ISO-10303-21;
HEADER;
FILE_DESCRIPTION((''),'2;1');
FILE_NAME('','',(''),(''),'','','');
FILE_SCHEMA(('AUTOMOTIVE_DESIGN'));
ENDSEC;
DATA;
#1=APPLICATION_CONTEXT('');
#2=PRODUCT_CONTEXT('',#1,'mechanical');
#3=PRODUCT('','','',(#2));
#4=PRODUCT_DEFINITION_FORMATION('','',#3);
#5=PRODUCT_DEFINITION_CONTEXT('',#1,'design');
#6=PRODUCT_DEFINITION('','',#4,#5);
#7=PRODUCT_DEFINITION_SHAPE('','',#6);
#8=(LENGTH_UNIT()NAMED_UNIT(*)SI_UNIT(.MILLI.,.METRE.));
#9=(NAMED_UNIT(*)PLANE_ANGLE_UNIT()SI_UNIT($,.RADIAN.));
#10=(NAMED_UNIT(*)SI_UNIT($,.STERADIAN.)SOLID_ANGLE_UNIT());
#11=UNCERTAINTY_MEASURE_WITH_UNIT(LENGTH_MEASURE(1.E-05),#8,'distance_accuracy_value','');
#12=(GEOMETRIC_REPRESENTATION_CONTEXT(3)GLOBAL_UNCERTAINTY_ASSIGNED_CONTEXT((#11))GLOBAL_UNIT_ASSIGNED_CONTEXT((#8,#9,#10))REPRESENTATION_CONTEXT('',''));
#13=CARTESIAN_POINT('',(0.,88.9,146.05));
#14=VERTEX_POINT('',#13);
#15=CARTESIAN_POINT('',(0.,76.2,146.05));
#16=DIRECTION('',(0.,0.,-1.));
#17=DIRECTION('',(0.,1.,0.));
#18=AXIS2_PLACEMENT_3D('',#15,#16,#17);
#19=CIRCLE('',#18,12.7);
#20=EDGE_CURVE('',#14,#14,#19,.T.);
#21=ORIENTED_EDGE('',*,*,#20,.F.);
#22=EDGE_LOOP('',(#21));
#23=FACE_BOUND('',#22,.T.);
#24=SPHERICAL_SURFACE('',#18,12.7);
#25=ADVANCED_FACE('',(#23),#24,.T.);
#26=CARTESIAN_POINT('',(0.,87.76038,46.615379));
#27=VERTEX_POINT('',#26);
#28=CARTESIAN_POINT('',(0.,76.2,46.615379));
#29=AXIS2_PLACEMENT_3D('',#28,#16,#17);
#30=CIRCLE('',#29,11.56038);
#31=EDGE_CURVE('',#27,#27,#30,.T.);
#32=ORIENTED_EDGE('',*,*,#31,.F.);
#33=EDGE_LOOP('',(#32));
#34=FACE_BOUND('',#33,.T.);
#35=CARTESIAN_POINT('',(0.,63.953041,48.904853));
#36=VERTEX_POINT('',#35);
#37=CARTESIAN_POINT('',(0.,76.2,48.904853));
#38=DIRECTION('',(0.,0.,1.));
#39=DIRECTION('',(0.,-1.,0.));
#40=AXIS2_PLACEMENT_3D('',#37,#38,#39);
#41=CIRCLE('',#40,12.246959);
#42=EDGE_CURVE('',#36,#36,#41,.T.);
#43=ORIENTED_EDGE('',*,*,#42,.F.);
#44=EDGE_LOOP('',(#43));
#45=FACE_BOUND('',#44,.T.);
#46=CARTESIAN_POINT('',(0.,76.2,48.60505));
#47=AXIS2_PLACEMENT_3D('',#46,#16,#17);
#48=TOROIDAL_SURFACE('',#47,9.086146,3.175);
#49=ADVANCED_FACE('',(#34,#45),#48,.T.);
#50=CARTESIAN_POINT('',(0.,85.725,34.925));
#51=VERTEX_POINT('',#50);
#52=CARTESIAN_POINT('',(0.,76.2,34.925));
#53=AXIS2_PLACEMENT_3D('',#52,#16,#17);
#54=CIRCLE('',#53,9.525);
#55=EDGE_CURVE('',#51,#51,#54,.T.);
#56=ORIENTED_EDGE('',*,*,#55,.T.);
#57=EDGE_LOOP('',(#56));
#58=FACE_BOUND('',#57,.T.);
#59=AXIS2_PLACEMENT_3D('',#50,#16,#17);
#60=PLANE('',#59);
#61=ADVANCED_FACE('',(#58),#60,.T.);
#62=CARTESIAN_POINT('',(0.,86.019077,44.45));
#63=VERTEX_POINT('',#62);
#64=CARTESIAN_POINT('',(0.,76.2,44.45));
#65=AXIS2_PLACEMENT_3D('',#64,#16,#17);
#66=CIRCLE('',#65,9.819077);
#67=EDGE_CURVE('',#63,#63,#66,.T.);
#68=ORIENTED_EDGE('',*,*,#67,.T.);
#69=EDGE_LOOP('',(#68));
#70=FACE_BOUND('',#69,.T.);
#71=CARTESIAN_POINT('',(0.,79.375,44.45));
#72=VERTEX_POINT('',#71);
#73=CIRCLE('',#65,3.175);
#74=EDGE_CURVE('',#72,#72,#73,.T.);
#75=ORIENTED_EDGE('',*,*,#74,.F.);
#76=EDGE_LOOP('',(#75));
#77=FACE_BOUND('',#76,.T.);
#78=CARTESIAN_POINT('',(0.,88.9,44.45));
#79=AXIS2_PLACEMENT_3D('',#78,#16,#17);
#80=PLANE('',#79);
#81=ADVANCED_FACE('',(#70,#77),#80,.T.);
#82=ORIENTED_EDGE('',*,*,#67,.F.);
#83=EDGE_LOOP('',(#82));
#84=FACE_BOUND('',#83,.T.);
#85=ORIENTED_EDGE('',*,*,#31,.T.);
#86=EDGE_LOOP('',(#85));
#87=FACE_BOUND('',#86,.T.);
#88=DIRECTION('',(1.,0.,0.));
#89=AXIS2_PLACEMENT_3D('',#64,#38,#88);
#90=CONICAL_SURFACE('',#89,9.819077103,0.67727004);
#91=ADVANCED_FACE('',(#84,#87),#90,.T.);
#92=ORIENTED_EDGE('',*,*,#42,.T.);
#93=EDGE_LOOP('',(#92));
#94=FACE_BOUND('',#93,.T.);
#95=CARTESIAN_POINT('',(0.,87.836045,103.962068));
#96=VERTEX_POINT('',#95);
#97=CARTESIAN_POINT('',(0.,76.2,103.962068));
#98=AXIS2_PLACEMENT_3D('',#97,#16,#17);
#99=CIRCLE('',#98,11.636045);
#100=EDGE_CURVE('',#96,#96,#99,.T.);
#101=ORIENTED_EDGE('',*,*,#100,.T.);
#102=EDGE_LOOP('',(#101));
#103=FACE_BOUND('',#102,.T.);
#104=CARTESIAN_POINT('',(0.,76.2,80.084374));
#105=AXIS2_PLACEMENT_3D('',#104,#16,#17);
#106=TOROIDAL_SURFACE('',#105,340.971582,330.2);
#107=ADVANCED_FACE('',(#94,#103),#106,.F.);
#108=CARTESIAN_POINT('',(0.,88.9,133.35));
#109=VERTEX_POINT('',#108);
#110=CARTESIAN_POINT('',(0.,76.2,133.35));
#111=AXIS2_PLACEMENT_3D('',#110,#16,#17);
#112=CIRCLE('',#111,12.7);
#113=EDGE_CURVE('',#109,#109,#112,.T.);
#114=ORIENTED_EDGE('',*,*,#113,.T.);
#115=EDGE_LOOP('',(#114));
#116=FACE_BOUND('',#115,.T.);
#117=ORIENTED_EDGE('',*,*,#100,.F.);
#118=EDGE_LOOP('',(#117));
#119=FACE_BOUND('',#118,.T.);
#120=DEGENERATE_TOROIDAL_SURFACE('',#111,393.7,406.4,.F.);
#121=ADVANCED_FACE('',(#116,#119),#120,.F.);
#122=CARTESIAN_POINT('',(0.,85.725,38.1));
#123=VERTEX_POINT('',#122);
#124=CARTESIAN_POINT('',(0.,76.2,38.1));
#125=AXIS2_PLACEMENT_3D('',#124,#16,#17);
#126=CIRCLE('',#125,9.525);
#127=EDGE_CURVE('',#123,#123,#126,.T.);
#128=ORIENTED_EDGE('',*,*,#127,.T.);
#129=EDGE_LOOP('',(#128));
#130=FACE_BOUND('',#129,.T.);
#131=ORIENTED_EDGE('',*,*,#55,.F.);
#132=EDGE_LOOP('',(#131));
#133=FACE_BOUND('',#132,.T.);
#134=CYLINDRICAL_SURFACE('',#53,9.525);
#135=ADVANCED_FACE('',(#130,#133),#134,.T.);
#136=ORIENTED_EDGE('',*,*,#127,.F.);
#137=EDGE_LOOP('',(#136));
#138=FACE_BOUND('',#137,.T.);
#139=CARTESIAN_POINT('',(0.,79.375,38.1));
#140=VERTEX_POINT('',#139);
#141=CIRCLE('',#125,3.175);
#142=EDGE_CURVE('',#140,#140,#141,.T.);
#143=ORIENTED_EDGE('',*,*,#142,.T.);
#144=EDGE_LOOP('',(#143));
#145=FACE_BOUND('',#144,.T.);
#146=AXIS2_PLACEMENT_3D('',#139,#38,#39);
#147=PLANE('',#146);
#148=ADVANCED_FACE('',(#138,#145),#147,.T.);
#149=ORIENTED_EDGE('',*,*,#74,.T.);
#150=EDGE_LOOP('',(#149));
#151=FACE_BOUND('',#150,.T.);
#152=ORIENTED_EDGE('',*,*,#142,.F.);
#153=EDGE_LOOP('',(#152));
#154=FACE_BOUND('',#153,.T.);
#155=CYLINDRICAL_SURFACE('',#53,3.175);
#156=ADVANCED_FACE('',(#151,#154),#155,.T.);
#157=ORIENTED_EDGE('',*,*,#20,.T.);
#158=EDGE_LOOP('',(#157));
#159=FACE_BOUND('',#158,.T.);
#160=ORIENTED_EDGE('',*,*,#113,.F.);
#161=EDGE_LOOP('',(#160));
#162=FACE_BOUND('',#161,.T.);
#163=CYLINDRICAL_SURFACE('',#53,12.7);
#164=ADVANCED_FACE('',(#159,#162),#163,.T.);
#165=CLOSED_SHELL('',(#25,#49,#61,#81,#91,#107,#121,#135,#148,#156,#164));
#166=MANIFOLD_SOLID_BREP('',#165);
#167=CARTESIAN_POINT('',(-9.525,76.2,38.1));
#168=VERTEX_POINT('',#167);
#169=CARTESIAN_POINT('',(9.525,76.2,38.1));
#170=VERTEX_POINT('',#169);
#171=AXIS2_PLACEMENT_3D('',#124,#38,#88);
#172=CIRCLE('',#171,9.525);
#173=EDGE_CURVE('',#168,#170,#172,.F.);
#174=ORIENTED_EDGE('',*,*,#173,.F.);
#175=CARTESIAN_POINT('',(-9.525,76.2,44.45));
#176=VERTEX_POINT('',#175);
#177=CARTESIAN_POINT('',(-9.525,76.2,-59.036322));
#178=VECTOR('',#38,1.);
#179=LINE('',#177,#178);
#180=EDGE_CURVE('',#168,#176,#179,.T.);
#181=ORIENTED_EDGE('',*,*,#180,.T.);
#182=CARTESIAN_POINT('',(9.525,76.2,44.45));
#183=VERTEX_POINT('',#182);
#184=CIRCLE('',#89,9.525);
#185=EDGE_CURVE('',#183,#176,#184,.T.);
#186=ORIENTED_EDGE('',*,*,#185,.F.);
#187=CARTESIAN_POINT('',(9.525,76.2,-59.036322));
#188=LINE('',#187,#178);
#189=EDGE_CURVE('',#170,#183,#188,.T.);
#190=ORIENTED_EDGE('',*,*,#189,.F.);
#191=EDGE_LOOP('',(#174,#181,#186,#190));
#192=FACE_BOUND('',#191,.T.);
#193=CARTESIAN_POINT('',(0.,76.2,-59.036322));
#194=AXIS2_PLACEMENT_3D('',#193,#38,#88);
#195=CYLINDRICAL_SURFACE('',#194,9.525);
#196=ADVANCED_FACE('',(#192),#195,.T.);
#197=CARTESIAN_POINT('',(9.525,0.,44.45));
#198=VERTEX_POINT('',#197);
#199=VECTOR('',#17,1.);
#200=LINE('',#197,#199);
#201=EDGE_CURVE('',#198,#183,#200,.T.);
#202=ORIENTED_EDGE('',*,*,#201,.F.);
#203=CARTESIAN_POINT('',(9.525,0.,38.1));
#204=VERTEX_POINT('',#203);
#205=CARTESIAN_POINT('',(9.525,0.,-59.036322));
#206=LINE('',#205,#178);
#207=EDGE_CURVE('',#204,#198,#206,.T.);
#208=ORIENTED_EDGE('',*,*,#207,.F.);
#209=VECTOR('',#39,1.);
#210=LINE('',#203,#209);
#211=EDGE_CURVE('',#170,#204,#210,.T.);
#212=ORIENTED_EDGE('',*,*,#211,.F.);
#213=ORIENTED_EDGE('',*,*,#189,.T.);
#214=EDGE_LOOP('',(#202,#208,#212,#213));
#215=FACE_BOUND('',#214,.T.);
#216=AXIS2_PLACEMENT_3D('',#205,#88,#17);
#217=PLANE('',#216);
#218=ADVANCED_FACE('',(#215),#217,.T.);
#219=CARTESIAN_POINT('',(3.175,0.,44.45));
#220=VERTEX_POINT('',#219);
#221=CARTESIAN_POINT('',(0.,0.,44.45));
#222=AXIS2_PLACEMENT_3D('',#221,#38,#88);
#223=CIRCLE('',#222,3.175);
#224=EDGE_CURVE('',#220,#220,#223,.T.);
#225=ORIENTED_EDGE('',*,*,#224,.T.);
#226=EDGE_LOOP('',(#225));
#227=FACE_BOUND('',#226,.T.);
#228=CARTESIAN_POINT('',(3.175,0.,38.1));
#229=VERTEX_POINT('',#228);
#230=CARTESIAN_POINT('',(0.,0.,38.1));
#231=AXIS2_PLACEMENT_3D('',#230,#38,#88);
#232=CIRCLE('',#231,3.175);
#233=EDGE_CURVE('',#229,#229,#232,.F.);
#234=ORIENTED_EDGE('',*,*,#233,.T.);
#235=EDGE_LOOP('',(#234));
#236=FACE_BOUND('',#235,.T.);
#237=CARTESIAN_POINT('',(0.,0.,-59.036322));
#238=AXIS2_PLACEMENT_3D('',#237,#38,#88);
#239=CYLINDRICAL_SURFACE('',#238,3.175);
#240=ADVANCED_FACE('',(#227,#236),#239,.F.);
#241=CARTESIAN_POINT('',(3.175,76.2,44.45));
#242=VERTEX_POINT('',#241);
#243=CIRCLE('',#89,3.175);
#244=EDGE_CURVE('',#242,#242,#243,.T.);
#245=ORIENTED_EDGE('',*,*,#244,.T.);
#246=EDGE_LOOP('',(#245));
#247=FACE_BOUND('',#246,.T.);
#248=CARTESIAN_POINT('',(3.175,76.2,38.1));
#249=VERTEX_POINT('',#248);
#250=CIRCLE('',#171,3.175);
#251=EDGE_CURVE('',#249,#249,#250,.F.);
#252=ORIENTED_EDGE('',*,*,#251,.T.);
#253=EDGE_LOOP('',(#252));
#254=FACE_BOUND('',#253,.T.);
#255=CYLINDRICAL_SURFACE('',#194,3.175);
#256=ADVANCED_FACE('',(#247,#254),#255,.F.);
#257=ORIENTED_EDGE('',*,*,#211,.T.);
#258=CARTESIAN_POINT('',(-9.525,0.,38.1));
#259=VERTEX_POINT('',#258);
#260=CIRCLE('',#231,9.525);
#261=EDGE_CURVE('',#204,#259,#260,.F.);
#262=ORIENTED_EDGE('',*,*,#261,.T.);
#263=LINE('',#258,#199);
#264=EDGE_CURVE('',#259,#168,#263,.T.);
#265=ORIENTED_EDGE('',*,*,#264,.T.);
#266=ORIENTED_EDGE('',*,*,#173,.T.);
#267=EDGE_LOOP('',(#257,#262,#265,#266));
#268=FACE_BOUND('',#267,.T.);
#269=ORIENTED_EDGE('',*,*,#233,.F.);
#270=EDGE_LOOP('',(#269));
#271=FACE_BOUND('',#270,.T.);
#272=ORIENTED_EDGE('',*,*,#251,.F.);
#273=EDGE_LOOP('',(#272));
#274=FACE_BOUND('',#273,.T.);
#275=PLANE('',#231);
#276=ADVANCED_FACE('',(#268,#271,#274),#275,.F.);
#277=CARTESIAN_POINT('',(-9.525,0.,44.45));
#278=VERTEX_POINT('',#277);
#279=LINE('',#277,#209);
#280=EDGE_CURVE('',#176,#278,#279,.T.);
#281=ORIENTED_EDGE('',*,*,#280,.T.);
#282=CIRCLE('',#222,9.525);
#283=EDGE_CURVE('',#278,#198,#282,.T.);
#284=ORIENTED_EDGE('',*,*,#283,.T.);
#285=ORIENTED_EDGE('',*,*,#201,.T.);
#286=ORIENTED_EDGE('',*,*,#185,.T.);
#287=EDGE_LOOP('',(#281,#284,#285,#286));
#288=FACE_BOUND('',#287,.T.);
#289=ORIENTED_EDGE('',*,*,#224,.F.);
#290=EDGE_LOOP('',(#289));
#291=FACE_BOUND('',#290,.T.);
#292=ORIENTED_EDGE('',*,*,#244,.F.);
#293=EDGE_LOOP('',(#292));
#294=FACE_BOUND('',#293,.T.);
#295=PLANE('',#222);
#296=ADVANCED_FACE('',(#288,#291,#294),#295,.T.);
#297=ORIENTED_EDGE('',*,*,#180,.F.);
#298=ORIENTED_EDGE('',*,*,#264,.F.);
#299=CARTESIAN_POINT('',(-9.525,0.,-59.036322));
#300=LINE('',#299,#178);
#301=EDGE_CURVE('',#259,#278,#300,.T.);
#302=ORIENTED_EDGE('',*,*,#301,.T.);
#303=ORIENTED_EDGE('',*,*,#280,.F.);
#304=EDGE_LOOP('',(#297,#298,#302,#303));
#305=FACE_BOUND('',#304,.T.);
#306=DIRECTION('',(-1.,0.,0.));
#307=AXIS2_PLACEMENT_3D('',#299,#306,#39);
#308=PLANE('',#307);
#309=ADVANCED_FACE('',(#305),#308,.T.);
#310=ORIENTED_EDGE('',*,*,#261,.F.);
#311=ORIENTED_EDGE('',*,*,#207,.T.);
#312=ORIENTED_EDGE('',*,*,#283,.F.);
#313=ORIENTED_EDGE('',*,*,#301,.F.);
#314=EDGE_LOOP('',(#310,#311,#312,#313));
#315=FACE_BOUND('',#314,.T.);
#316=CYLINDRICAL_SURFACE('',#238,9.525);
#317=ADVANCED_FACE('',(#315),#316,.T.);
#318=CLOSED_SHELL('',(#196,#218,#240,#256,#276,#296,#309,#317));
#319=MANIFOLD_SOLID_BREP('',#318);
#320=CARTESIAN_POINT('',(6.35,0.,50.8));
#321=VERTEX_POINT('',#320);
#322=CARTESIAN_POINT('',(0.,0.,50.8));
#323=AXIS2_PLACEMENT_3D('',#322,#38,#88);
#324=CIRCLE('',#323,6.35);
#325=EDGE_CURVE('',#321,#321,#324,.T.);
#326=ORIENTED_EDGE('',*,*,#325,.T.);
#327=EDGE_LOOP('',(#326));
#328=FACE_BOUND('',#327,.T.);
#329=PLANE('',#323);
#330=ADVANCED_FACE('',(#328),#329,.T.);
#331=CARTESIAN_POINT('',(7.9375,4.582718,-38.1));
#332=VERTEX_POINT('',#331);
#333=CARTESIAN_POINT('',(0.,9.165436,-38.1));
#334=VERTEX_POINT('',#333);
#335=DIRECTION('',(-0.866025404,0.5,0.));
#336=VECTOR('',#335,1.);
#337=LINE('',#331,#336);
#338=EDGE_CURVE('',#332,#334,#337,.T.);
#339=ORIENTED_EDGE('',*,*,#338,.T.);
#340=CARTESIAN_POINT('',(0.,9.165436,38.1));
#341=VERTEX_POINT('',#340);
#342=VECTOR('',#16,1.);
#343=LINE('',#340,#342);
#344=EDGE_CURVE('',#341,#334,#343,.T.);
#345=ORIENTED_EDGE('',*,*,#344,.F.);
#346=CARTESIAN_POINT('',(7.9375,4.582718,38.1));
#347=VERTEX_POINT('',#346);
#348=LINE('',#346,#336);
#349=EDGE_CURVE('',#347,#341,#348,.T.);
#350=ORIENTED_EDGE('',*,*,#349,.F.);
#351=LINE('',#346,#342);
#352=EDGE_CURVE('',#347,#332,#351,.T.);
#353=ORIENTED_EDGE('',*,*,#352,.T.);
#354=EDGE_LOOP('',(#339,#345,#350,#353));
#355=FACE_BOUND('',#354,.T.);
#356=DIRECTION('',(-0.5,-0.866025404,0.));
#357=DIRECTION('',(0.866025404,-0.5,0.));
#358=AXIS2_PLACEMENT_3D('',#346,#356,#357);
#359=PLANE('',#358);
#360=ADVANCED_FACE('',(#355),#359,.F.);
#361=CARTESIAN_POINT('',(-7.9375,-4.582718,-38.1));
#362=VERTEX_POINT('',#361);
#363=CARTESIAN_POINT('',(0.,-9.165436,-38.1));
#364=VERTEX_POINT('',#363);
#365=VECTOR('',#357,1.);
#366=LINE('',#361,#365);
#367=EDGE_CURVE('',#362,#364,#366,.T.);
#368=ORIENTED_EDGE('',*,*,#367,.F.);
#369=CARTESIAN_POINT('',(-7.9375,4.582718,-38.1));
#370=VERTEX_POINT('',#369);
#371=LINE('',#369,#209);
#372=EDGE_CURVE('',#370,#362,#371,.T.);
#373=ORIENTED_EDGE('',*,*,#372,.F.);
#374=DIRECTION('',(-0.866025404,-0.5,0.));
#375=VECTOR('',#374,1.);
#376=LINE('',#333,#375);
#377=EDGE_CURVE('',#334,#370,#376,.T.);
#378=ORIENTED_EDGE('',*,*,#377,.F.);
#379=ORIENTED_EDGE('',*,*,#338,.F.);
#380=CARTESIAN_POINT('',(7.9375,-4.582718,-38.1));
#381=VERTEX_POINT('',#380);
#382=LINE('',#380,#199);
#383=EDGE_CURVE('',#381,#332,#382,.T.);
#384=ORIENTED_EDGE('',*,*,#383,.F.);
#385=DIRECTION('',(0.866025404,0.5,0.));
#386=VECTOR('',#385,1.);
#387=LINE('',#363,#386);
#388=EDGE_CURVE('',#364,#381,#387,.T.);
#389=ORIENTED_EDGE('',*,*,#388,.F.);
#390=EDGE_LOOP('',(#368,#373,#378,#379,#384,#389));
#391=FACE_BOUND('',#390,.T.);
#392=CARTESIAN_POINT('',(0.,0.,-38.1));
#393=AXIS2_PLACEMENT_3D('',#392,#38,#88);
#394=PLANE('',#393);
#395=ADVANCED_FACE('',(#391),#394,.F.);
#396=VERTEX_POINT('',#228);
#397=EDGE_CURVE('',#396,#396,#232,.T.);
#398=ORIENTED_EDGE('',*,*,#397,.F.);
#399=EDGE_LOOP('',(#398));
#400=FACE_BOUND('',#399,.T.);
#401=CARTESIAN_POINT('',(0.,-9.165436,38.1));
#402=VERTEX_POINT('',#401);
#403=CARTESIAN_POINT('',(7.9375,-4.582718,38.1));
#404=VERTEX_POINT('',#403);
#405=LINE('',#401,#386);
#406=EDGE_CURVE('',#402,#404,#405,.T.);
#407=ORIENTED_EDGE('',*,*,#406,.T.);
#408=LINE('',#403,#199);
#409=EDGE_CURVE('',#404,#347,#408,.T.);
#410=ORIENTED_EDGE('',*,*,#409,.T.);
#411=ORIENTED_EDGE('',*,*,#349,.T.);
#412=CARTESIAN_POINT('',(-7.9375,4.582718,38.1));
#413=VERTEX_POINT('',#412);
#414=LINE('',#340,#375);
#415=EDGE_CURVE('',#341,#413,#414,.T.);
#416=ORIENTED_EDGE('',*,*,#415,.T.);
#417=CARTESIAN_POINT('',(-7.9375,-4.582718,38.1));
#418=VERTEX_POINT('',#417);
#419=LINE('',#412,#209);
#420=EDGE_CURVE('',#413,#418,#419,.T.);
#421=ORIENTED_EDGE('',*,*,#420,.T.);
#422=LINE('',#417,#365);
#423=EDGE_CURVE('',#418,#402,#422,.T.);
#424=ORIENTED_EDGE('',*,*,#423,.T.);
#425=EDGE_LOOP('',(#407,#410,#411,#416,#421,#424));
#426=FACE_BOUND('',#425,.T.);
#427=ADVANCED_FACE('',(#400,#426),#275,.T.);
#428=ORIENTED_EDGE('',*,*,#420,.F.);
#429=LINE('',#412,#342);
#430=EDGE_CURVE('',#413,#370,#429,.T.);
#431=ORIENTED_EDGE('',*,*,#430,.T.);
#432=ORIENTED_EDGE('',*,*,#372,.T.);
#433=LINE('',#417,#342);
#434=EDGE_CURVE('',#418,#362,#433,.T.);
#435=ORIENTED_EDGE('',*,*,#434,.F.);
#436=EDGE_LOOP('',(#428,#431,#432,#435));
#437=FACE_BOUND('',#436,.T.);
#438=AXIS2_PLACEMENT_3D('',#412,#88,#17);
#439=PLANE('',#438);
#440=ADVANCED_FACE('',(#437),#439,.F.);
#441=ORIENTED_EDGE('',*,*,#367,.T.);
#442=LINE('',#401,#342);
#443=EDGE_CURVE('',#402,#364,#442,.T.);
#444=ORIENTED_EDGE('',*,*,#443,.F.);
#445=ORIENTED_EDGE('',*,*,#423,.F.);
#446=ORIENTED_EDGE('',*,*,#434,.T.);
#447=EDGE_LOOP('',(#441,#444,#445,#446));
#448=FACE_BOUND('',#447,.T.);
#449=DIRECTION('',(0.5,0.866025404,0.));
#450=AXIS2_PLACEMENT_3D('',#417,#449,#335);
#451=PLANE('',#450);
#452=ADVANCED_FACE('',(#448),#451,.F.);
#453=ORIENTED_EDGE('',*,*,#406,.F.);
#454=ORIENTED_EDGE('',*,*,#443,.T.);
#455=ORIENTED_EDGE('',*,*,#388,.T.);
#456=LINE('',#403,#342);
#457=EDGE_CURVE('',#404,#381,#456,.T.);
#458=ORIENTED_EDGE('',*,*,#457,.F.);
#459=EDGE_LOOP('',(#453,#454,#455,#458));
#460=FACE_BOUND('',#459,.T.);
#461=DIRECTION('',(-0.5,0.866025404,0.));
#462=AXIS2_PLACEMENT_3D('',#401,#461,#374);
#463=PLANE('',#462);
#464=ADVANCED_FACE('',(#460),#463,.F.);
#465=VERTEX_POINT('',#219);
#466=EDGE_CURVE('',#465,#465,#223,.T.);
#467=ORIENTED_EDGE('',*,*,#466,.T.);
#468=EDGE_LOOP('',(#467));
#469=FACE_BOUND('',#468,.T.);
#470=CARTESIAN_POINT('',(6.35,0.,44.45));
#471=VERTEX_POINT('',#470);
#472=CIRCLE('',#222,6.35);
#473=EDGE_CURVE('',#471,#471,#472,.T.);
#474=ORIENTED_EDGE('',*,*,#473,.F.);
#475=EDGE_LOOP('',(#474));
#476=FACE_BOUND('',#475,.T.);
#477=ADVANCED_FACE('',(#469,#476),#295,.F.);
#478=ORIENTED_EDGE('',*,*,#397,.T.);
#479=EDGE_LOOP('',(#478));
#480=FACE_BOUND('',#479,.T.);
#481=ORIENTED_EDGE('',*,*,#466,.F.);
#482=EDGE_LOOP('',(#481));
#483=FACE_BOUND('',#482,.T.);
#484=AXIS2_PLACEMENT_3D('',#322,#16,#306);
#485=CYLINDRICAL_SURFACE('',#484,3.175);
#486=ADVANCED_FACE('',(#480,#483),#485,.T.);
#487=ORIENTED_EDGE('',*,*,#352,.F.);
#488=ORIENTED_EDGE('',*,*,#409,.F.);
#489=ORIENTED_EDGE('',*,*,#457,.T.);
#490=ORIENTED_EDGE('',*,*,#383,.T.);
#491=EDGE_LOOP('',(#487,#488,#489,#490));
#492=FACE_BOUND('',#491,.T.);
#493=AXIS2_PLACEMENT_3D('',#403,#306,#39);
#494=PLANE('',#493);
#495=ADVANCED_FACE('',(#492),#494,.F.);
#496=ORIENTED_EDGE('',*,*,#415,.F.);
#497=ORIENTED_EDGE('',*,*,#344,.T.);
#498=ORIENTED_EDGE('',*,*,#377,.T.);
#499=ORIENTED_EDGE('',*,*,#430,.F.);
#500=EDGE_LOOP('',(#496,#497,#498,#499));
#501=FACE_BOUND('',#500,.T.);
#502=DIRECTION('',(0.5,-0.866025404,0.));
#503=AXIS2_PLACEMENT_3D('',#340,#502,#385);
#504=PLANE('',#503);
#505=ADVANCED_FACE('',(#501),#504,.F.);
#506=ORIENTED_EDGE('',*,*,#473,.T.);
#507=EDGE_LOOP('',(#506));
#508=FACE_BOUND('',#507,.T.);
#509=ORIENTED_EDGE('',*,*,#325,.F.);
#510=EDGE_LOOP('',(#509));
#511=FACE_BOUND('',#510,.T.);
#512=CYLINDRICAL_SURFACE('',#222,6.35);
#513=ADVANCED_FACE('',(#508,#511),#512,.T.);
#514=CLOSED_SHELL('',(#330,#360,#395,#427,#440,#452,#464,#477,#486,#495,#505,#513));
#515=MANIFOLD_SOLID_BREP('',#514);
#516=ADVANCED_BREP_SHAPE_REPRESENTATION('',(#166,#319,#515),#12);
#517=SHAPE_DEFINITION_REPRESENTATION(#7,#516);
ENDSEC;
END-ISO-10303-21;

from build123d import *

# Parameters (mm, degrees)
BOSS_EXTRUDE1_DEPTH = 38.1
SKETCH2_R           = 3.175
BOSS_EXTRUDE2_DEPTH = 12.7
SKETCH5_R           = 6.35
BOSS_EXTRUDE4_DEPTH = 6.35
SKETCH3_R           = 3.175
BOSS_EXTRUDE3_DEPTH = 6.35
CHAMFER1_SIZE       = 2.880922897
FILLET1_R           = 3.175


with BuildPart() as part:
    # Sketch1 → Boss-Extrude1 (new, symmetric)
    with BuildSketch(Plane.XY):
        Polygon((0, 9.165435523), (-7.9375, 4.582717762), (-7.9375, -4.582717762), (0, -9.165435523), (7.9375, -4.582717762), (7.9375, 4.582717762), align=None)
    extrude(amount=BOSS_EXTRUDE1_DEPTH, both=True)

    # Sketch2 → Boss-Extrude2 (add)
    with BuildSketch(Plane.XY.offset(38.1)):
        Circle(SKETCH2_R)
    extrude(amount=BOSS_EXTRUDE2_DEPTH)

    # Sketch5 → Boss-Extrude4 (add)
    with BuildSketch(Plane.XY.offset(50.8)):
        Circle(SKETCH5_R)
    extrude(amount=-BOSS_EXTRUDE4_DEPTH)


with BuildPart() as body_2:
    # Sketch3 → Boss-Extrude3 (new body)
    with BuildSketch(Plane.XY.offset(44.45)):
        with BuildLine():
            Line((-9.525, 0), (-9.525, 76.2))
            ThreePointArc((-9.525, 76.2), (0, 85.725), (9.525, 76.2))
            Line((9.525, 76.2), (9.525, 0))
            ThreePointArc((9.525, 0), (0, -9.525), (-9.525, 0))
        make_face()
        Circle(SKETCH3_R, mode=Mode.SUBTRACT)
        with Locations((0, 76.2)):
            Circle(SKETCH3_R, mode=Mode.SUBTRACT)
    extrude(amount=-BOSS_EXTRUDE3_DEPTH)


with BuildPart() as body_3:
    # Sketch6 → Revolve1 (revolve)
    with BuildSketch(Plane(origin=(0, 0, 0), x_dir=(0, 0, -1), z_dir=(1, 0, 0))):
        with BuildLine():
            Line((-38.1, 79.375), (-38.1, 85.725))
            Line((-38.1, 85.725), (-34.925, 85.725))
            Line((-34.925, 85.725), (-34.925, 76.2))
            Line((-34.925, 76.2), (-158.75, 76.2))
            ThreePointArc((-158.75, 76.2), (-155.030256121, 85.180256121), (-146.05, 88.9))
            Line((-146.05, 88.9), (-133.35, 88.9))
            ThreePointArc((-133.35, 88.9), (-118.646407511, 88.633924178), (-103.962068321, 87.836045118))
            ThreePointArc((-103.962068321, 87.836045118), (-74.182011823, 87.024338682), (-44.45, 88.9))
            Line((-44.45, 88.9), (-44.45, 79.375))
            Line((-44.45, 79.375), (-38.1, 79.375))
        make_face()
    revolve(axis=Axis((0, 76.2, 34.925), (0, 0, 1)))

    # Chamfer1
    # the kernel refuses this chamfer: 3.175, 2.880922897 mm, written as the material it takes off along each edge
    with BuildSketch(Plane(origin=(0, 76.2, 44.45), x_dir=(0, 1, 0), z_dir=(1, 0, 0))) as chamfer1_piece_1:
        with BuildLine():
            Line((12.371021751, 3.173444219), (12.7 - CHAMFER1_SIZE, 0))
            Line((12.7 - CHAMFER1_SIZE, 0), (12.7, 0))
            ThreePointArc((12.7, 0), (12.527028201, 1.631208875), (12.371021751, 3.173444219))
        make_face()
    revolve(axis=Axis((0, 76.2, 44.45), (0, 0, 1)), mode=Mode.SUBTRACT)

    # Fillet1
    fillet1_edges = [body_3.edges().sort_by_distance(p)[0] for p in [
        (0, 63.828978249, 47.623444219),
    ]]
    fillet(fillet1_edges, radius=FILLET1_R)


solid = Compound([part.part, body_2.part, body_3.part])
